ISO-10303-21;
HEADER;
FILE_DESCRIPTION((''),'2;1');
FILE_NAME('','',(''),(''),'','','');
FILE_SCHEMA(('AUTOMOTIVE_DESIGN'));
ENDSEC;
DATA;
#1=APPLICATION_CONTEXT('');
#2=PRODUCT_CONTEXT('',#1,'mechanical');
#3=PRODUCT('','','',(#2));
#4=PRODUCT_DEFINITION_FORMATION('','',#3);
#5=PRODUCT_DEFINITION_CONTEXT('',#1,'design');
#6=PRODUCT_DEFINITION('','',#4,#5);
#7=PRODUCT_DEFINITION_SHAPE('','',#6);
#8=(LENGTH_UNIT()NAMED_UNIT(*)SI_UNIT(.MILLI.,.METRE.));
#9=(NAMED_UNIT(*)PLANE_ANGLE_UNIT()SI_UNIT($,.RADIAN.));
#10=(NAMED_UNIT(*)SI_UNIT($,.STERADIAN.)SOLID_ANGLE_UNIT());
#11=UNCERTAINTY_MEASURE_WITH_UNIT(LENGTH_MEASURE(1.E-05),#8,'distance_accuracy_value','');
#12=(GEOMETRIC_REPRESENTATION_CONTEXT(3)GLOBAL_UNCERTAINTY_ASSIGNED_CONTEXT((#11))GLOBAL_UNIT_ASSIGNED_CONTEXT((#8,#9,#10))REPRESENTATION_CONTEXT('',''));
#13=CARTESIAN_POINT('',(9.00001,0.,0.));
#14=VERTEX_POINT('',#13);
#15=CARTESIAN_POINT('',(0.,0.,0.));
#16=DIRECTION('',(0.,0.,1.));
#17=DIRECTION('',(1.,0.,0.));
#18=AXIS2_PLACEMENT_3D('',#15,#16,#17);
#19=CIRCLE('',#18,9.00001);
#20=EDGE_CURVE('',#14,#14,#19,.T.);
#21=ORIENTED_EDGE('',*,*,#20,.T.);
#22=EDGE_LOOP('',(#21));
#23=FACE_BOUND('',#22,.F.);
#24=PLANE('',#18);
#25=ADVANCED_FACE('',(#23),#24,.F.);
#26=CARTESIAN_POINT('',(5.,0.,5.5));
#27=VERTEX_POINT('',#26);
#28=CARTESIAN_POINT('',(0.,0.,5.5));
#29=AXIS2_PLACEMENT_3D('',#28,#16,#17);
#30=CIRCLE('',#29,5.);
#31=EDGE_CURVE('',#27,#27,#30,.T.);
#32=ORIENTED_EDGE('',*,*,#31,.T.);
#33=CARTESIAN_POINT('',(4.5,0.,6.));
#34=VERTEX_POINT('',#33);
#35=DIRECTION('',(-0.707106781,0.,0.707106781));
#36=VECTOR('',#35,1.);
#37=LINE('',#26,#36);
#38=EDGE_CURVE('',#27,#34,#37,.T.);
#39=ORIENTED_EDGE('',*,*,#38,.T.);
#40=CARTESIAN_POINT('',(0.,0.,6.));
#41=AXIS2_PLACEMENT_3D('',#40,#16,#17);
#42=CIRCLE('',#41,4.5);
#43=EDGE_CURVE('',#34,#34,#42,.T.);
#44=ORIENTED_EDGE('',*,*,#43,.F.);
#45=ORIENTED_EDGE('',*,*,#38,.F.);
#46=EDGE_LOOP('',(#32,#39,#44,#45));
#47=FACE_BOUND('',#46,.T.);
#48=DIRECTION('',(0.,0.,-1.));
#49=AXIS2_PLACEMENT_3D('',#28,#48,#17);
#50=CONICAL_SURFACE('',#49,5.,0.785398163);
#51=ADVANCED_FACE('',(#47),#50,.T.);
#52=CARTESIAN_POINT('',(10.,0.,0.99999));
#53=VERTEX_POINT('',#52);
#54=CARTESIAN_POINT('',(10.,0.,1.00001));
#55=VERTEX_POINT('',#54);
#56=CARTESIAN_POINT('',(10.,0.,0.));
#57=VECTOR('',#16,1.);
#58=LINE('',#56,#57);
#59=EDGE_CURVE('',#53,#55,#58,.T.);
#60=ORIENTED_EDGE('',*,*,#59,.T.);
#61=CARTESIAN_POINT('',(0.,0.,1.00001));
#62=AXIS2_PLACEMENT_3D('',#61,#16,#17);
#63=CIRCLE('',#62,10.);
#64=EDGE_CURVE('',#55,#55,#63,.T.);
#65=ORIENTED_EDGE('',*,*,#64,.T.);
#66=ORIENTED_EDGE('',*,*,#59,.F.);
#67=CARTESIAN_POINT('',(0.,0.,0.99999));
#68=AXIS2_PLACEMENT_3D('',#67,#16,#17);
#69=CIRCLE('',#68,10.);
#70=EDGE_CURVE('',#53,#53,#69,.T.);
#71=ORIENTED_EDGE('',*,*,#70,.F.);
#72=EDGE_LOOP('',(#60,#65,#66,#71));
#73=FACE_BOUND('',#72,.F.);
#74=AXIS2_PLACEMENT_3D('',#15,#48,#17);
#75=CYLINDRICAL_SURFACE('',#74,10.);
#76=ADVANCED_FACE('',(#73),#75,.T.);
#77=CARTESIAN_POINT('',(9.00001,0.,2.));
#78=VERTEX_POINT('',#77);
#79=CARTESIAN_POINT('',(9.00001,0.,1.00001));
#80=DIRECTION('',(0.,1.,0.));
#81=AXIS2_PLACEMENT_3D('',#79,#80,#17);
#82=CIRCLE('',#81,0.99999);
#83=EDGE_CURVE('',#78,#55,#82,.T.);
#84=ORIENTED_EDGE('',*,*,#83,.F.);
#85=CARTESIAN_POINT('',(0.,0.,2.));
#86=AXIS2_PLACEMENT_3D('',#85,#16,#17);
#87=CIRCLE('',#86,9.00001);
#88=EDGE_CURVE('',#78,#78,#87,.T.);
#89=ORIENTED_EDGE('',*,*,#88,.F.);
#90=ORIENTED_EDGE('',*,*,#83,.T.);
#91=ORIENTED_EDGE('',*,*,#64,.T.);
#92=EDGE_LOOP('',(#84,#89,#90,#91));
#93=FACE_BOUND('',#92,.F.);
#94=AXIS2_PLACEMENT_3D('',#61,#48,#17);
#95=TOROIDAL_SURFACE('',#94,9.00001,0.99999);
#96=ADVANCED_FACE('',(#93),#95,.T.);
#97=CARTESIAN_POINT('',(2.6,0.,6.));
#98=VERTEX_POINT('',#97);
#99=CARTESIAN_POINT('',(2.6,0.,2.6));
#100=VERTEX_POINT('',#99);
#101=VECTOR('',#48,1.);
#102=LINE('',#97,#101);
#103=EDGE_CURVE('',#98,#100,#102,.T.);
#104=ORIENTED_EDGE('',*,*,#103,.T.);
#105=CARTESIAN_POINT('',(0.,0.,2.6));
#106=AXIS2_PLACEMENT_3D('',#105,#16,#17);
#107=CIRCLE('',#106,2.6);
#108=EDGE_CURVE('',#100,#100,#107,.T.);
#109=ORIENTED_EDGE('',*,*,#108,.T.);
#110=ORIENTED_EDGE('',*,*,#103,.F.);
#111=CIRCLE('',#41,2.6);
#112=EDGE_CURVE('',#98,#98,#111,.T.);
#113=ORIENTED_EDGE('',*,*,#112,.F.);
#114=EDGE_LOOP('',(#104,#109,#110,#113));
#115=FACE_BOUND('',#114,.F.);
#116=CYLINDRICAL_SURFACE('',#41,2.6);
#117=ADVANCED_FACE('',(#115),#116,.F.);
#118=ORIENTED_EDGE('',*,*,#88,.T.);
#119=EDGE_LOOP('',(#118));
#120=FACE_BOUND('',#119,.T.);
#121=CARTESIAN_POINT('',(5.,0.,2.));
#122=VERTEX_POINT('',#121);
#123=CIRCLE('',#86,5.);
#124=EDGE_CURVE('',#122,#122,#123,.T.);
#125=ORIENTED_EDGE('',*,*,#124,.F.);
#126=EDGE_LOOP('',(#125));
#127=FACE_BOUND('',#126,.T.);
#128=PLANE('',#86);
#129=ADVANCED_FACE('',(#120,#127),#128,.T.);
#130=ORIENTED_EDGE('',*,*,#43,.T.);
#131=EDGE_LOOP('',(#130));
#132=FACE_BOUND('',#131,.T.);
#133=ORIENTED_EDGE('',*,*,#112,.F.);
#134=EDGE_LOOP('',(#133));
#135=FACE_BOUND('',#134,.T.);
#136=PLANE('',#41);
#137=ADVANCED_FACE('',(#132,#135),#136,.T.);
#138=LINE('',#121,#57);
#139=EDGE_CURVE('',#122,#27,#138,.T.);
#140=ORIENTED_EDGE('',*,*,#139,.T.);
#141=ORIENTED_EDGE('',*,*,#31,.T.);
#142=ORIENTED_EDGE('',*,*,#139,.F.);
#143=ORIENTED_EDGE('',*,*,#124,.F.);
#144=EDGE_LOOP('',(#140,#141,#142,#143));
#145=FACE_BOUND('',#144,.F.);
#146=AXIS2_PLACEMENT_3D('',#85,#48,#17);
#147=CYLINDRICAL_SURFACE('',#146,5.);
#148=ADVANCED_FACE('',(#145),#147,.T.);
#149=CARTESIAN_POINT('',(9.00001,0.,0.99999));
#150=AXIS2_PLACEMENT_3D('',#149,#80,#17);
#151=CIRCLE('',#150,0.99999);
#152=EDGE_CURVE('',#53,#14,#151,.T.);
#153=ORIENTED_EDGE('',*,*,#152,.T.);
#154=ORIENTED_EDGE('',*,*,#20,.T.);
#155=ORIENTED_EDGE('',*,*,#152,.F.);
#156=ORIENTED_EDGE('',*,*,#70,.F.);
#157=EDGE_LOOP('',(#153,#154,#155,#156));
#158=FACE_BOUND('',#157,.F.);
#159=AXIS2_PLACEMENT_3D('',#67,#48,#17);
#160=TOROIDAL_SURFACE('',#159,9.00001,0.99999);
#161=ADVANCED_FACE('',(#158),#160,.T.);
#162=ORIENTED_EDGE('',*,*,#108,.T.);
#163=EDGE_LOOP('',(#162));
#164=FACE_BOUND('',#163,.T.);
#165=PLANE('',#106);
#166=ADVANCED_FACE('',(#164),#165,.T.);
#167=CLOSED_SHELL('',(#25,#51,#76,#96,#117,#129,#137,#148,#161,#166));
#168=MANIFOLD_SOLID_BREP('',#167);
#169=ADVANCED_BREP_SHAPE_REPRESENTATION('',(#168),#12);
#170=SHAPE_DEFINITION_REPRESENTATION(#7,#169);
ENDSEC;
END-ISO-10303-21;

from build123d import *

# Parameters (mm, degrees)
F0_R     = 10
F1_DEPTH = 2
F2_R     = 5
F3_DEPTH = 4
F4_SIZE  = 0.5
F5_R     = 0.99999
F6_R     = 2.6
F7_DEPTH = 3.4


# Not quite as in the source:
# - a fillet or chamfer is up to 0.001 mm smaller than in the source, because OpenCascade refuses the exact size


with BuildPart() as f1:
    # F0 (on Top) → F1 (new body)
    with BuildSketch(Plane.XY):
        Circle(F0_R)
    extrude(amount=F1_DEPTH)

    # F2 (on face) → F3 (join)
    with BuildSketch(Plane.XY.offset(2)):
        Circle(F2_R)
    extrude(amount=F3_DEPTH)

    # F4
    f4_edges = [f1.edges().sort_by_distance(p)[0] for p in [
        (-5, 0, 6),
    ]]
    chamfer(f4_edges, length=F4_SIZE)

    # F5 (radius 1 in the source; OpenCascade refuses exactly that, so slightly less here)
    f5_edges = [f1.edges().sort_by_distance(p)[0] for p in [
        (-10, 0, 0),
        (-10, 0, 2),
    ]]
    fillet(f5_edges, radius=F5_R)

    # F6 (on face) → F7 (cut)
    with BuildSketch(Plane.XY.offset(6)):
        Circle(F6_R)
    extrude(amount=-F7_DEPTH, mode=Mode.SUBTRACT)


solid = f1.part
